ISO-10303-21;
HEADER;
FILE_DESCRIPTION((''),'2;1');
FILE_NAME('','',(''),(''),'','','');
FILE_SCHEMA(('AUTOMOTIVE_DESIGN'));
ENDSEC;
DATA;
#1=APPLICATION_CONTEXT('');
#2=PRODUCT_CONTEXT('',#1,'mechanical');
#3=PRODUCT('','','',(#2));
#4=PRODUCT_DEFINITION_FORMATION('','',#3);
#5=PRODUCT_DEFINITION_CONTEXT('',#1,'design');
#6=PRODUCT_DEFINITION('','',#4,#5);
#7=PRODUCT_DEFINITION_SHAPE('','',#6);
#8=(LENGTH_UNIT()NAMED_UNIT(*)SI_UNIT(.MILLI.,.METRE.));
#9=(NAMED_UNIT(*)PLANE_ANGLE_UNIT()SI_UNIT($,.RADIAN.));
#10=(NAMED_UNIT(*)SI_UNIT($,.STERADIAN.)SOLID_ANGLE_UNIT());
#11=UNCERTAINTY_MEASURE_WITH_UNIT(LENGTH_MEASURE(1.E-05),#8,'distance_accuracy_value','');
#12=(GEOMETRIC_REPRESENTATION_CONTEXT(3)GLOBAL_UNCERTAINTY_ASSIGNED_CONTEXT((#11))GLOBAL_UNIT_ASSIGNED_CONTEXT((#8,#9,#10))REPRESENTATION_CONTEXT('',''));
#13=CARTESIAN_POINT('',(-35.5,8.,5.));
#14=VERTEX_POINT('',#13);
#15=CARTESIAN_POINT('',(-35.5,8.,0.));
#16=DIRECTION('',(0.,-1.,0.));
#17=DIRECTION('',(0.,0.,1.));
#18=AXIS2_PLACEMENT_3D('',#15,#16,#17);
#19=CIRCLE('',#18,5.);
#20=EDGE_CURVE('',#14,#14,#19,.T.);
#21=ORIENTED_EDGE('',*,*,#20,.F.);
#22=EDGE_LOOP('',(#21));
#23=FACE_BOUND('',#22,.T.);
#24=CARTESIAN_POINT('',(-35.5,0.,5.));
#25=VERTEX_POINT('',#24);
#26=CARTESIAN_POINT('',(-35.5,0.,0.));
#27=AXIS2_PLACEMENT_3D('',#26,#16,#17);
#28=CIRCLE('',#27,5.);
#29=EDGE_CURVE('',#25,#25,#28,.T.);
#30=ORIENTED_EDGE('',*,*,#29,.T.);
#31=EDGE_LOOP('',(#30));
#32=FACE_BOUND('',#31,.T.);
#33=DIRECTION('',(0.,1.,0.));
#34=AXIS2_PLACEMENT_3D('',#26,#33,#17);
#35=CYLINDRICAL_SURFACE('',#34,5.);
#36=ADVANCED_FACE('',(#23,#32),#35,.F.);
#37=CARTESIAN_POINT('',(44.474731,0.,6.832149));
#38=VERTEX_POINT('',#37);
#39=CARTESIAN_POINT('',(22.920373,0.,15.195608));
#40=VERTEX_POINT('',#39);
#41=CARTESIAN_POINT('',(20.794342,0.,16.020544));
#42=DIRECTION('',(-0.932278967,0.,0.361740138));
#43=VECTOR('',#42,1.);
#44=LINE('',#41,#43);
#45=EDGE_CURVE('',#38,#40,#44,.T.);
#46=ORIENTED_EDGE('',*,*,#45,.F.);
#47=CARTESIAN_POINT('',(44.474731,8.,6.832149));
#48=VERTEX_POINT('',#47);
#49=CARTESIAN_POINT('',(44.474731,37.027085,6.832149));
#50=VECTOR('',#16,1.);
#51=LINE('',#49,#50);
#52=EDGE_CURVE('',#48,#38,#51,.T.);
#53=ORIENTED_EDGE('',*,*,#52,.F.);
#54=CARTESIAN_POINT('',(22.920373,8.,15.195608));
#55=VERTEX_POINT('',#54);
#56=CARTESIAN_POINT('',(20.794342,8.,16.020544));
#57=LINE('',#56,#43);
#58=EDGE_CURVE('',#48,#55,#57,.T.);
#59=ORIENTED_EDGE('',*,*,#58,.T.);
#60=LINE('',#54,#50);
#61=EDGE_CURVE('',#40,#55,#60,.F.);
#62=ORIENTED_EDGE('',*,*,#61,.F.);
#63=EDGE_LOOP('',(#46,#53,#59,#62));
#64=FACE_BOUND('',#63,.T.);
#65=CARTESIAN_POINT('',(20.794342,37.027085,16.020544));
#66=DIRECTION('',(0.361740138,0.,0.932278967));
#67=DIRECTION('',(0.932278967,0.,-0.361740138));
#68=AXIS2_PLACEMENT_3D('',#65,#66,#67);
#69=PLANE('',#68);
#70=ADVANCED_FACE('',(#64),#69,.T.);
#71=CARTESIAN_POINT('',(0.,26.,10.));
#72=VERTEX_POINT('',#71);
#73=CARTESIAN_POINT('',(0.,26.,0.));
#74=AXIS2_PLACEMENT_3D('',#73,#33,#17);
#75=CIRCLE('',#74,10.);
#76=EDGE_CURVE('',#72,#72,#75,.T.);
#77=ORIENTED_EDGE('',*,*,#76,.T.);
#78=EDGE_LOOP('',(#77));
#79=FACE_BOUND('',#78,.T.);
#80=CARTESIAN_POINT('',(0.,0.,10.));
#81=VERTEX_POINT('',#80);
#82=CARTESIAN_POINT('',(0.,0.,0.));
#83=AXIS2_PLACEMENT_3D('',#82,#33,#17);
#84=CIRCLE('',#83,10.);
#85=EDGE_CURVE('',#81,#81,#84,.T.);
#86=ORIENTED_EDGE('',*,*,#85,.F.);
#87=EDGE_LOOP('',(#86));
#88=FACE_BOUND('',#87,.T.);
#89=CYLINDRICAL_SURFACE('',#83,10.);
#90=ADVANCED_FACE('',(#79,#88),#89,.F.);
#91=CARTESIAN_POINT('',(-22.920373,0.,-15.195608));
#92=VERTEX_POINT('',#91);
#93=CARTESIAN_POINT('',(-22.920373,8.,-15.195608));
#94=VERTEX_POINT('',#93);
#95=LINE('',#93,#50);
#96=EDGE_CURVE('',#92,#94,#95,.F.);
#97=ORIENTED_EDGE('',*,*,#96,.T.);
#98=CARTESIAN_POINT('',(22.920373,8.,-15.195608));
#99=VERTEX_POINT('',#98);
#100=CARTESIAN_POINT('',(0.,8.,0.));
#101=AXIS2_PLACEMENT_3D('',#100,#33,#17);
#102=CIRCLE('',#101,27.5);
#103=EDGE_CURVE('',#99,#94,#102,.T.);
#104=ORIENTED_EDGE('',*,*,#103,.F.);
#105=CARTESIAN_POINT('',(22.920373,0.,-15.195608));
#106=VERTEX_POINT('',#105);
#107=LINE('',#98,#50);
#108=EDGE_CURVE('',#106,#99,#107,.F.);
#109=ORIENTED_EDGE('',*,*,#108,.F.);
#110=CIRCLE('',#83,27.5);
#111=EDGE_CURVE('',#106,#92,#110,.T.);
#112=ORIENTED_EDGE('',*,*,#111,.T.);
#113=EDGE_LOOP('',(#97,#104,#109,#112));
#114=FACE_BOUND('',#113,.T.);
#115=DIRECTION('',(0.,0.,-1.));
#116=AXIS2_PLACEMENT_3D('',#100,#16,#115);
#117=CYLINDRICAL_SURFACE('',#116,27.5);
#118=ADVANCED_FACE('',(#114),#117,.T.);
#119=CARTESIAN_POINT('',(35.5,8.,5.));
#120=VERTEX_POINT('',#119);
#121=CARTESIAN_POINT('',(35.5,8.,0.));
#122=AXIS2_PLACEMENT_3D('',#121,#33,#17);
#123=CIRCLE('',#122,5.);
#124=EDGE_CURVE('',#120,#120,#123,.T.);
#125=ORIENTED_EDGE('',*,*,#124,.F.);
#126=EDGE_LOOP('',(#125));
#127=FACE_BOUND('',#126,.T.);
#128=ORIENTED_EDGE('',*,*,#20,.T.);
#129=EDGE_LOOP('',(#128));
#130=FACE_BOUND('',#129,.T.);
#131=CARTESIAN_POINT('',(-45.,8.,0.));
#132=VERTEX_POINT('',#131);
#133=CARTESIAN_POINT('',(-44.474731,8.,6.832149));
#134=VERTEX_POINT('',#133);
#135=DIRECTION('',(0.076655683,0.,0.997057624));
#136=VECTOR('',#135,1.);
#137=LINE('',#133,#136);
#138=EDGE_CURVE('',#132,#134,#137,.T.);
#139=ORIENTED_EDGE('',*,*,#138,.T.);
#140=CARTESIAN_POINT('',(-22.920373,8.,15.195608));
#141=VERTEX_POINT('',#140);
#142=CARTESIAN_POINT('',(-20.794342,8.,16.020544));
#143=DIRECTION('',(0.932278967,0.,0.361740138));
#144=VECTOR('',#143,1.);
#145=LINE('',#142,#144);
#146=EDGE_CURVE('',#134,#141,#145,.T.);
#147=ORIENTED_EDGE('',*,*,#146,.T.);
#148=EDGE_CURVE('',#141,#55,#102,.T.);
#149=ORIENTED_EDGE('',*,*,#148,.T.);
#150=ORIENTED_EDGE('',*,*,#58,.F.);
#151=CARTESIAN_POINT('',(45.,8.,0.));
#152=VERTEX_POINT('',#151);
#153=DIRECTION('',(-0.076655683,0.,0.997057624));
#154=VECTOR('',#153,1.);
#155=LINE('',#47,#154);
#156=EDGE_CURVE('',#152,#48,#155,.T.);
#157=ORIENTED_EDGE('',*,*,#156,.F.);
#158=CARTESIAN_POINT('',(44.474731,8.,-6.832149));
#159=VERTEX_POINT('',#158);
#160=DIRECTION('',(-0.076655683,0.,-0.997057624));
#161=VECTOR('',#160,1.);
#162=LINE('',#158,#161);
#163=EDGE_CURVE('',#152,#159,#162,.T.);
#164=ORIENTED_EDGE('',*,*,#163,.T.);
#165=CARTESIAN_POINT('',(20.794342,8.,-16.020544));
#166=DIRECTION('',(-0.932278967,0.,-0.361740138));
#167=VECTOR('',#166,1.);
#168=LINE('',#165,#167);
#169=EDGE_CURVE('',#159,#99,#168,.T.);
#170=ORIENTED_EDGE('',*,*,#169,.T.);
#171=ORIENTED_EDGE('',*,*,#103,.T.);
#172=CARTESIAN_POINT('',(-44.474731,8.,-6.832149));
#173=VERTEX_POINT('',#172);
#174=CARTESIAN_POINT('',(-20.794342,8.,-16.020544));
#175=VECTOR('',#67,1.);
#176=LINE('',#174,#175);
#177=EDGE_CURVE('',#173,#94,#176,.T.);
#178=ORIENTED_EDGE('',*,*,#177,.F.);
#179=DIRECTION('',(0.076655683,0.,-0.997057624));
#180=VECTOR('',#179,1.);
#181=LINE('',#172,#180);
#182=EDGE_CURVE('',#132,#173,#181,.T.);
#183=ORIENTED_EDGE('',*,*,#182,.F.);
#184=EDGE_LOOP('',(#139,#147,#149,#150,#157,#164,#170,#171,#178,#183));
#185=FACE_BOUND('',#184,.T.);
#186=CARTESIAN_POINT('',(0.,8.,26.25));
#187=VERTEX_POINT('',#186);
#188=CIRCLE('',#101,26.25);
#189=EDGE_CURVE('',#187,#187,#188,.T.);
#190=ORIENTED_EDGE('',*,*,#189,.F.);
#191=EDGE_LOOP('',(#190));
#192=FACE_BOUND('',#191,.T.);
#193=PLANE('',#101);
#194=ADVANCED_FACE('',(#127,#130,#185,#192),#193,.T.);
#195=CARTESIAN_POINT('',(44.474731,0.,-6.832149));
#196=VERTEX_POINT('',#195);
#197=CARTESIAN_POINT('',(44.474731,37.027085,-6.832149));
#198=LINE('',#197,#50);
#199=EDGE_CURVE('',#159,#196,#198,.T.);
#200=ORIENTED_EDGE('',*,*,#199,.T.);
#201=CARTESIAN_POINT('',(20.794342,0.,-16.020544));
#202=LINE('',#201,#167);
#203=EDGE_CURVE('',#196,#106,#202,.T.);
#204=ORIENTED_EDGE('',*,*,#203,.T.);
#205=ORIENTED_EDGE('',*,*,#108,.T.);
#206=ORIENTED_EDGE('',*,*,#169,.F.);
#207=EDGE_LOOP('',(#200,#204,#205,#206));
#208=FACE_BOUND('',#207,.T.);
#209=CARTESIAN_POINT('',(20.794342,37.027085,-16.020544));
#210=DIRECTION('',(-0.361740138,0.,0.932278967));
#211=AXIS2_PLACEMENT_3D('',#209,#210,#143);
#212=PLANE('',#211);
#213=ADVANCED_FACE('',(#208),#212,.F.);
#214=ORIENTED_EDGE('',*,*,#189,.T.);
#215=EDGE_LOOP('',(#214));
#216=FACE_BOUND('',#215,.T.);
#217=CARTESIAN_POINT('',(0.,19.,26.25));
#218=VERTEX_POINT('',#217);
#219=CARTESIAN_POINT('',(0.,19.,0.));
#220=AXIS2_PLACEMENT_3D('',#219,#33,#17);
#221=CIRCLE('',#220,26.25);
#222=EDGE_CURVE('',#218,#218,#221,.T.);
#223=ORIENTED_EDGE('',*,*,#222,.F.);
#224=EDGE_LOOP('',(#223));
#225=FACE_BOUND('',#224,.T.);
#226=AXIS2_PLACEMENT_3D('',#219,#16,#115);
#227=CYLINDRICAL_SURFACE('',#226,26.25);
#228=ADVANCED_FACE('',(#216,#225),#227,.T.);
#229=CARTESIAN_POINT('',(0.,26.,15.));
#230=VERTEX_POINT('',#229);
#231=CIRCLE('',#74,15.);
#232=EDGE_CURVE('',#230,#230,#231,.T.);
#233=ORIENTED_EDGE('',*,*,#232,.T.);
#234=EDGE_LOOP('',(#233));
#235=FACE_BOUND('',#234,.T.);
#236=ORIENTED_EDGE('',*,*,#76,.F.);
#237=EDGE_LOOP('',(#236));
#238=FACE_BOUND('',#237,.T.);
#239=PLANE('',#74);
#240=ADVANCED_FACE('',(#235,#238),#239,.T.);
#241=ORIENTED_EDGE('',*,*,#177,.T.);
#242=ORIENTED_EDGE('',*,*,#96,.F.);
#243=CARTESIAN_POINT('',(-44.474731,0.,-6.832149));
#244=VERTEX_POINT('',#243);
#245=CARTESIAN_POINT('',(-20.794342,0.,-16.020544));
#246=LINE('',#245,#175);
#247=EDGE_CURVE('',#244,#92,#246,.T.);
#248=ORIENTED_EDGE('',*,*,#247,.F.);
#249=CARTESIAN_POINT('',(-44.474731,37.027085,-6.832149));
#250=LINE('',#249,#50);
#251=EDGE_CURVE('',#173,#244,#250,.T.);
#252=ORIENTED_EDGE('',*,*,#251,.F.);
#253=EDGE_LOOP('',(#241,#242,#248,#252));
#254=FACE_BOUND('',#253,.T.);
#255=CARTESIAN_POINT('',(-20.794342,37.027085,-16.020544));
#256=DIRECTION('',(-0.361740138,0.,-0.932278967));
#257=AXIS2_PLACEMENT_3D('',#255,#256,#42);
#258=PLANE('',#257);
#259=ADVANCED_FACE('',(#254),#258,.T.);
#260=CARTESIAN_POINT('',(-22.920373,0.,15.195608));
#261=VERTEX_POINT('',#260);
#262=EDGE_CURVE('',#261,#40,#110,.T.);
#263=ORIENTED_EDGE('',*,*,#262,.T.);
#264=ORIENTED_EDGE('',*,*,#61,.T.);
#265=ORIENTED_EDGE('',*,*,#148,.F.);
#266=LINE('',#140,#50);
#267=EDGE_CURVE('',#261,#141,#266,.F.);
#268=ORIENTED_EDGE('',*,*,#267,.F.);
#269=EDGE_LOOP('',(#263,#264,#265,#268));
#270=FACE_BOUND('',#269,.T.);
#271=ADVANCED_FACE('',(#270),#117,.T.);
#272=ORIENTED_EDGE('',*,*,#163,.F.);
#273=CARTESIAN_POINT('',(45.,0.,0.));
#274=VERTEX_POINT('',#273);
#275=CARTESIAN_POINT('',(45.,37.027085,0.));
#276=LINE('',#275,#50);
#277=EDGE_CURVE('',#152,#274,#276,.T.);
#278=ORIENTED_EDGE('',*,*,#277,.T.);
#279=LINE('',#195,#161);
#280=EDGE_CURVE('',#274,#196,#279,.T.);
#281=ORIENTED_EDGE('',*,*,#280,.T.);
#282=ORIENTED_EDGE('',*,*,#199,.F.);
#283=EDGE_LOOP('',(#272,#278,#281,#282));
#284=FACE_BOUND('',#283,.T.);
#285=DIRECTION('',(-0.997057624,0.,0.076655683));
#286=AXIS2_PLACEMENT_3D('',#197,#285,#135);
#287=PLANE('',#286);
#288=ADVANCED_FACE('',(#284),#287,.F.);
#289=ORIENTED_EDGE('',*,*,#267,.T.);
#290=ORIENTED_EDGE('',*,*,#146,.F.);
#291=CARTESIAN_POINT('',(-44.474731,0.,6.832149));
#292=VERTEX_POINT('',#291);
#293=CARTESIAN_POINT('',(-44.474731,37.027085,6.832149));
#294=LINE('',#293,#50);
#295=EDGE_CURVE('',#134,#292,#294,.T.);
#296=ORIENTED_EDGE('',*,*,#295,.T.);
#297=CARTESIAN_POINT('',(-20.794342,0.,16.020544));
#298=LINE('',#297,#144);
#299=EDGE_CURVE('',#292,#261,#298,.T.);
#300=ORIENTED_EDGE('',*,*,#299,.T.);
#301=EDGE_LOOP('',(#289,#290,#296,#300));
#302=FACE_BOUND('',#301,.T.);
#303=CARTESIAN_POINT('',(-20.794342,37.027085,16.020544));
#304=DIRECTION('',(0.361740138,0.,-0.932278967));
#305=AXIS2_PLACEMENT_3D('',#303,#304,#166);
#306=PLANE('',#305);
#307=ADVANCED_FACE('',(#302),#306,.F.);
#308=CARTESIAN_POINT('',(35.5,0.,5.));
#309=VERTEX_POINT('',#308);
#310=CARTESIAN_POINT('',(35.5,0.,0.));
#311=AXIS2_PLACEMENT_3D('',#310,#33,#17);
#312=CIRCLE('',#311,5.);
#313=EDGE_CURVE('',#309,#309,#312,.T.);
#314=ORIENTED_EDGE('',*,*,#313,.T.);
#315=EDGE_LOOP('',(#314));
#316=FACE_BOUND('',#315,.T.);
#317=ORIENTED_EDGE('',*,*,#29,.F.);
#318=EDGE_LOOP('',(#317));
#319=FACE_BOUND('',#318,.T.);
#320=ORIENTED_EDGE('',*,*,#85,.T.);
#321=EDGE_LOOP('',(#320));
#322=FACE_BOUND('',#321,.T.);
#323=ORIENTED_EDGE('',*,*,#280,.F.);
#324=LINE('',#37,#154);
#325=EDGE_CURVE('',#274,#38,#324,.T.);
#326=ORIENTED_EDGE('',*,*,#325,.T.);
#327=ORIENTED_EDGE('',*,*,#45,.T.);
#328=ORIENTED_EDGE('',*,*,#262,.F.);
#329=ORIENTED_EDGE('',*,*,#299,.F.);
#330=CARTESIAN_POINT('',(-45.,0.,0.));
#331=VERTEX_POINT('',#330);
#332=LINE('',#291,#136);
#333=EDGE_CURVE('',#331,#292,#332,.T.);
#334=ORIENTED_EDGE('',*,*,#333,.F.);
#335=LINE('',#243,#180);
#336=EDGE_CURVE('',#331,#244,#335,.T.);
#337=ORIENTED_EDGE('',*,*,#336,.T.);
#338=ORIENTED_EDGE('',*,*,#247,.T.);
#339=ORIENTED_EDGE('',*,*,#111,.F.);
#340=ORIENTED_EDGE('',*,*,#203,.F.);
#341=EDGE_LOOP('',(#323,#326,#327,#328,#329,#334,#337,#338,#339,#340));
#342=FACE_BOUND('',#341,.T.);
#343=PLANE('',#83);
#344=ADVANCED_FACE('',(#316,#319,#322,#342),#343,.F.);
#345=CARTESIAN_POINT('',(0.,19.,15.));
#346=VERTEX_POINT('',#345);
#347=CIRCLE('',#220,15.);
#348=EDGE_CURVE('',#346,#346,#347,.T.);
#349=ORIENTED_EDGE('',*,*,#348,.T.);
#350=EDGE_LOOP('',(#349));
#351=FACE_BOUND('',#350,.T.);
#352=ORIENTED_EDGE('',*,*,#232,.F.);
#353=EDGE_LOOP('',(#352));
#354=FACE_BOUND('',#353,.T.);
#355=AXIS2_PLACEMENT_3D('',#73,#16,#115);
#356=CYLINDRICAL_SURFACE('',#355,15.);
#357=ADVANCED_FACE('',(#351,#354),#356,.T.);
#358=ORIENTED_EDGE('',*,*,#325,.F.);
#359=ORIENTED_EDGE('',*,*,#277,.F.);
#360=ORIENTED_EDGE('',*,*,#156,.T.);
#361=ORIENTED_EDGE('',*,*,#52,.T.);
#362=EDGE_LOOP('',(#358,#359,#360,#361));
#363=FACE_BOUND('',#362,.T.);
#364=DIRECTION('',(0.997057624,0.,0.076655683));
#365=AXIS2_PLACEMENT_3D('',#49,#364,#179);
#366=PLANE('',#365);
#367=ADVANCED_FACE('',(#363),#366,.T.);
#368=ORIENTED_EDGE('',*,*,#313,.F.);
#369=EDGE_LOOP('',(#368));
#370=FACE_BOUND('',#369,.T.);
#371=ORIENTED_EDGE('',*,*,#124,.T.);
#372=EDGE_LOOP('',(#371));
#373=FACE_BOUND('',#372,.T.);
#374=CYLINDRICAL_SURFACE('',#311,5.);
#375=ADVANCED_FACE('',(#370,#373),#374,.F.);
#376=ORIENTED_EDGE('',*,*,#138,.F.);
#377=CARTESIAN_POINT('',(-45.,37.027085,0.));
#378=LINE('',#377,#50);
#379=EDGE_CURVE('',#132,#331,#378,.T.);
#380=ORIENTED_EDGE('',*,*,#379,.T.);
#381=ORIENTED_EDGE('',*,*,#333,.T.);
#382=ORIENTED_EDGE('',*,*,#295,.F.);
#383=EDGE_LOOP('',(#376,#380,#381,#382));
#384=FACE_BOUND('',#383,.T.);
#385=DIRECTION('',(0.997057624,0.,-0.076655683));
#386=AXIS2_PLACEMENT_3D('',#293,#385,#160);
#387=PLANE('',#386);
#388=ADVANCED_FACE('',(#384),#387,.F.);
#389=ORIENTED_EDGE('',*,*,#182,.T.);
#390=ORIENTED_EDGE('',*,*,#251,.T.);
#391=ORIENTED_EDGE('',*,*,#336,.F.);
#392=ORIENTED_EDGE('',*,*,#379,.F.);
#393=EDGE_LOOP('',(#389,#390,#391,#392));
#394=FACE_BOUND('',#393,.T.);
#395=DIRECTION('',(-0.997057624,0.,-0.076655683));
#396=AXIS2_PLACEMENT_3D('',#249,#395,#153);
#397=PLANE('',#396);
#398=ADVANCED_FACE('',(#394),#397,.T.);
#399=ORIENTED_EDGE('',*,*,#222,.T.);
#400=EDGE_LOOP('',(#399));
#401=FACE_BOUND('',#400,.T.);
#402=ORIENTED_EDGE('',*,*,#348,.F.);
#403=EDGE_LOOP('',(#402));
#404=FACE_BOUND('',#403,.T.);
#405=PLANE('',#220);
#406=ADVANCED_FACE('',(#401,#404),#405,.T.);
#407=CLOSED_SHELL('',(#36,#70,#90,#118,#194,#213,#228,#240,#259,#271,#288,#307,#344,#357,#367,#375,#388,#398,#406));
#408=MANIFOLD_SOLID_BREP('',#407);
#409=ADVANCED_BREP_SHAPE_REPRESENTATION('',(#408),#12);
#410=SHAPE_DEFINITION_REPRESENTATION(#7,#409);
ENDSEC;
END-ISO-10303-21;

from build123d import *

# Parameters (mm, degrees)
SKETCH1_R               = 27.5
BOSS_EXTRUDE1_DEPTH     = 8
SKETCH2_R               = 26.25
BOSS_EXTRUDE2_DEPTH     = 11
BOSS_EXTRUDE3_DEPTH     = 8
SKETCH4_R               = 5
CUT_EXTRUDE1_DEPTH      = 54.872534746
MIRROR2_OUTLINE_R       = 5
MIRROR2_DEPTH           = 8
SKETCH6_R               = 15
BOSS_EXTRUDE4_DEPTH     = 7
CUT_EXTRUDE2_DEPTH      = 57.055775795
CUT_EXTRUDE2_DEPTH_BACK = 57.055775795
SKETCH5_R               = 10


# Read off the part's stored shape, not the designer's step: Mirror2
with BuildPart() as part:
    # Sketch1 → Boss-Extrude1 (new body)
    with BuildSketch(Plane(origin=(0, 0, 0), x_dir=(1, 0, 0), z_dir=(0, 1, 0))):
        with Locations(Location((0, 0, 0), (0, 0, 270))):
            Circle(SKETCH1_R)
    extrude(amount=BOSS_EXTRUDE1_DEPTH)

    # Sketch2 → Boss-Extrude2 (add)
    with BuildSketch(Plane(origin=(0, 8, 0), x_dir=(1, 0, 0), z_dir=(0, 1, 0))):
        with Locations(Location((0, 0, 0), (0, 0, 270))):
            Circle(SKETCH2_R)
    extrude(amount=BOSS_EXTRUDE2_DEPTH)

    # Sketch3 → Boss-Extrude3 (add)
    with BuildSketch(Plane(origin=(0, 0, 0), x_dir=(1, 0, 0), z_dir=(0, 1, 0))):
        Polygon((20.794342335, 16.0205439), (44.474731406, 6.832149094), (45, 0), (20.794342335, 0), align=None)
    boss_extrude3 = extrude(amount=BOSS_EXTRUDE3_DEPTH)

    # Mirror1: Boss-Extrude3 across plane
    add(boss_extrude3.mirror(Plane.XY))

    # Sketch4 → Cut-Extrude1 (cut, through all)
    with BuildSketch(Plane(origin=(0, 8, 0), x_dir=(1, 0, 0), z_dir=(0, 1, 0))):
        with Locations(Location((35.5, 0, 0), (0, 0, 270))):
            Circle(SKETCH4_R)
    extrude(amount=-CUT_EXTRUDE1_DEPTH, mode=Mode.SUBTRACT)

    # Mirror2 outline → Mirror2 (add)
    with BuildSketch(Plane(origin=(0, 0, 0), x_dir=(1, 0, 0), z_dir=(0, 1, 0))):
        with BuildLine():
            ThreePointArc((-22.9203732, -15.195607667), (-27.5, 0), (-22.9203732, 15.195607667))
            Line((-22.9203732, 15.195607667), (-44.474731406, 6.832149094))
            Line((-44.474731406, 6.832149094), (-45, 0))
            Line((-45, 0), (-44.474731406, -6.832149094))
            Line((-44.474731406, -6.832149094), (-22.9203732, -15.195607667))
        make_face()
        with Locations((-35.5, 0)):
            Circle(MIRROR2_OUTLINE_R, mode=Mode.SUBTRACT)
    extrude(amount=MIRROR2_DEPTH)

    # Sketch6 → Boss-Extrude4 (add)
    with BuildSketch(Plane(origin=(0, 19, 0), x_dir=(1, 0, 0), z_dir=(0, 1, 0))):
        with Locations(Location((0, 0, 0), (0, 0, 270))):
            Circle(SKETCH6_R)
    extrude(amount=BOSS_EXTRUDE4_DEPTH)

    # Sketch5 → Cut-Extrude2 (cut, two sides: drawn at the far end of the back side and taken through both)
    with BuildSketch(Plane(origin=(0, 19, 0), x_dir=(1, 0, 0), z_dir=(0, 1, 0)).offset(-CUT_EXTRUDE2_DEPTH_BACK)):
        with Locations(Location((0, 0, 0), (0, 0, 270))):
            Circle(SKETCH5_R)
    extrude(amount=CUT_EXTRUDE2_DEPTH + CUT_EXTRUDE2_DEPTH_BACK, mode=Mode.SUBTRACT)


solid = part.part
